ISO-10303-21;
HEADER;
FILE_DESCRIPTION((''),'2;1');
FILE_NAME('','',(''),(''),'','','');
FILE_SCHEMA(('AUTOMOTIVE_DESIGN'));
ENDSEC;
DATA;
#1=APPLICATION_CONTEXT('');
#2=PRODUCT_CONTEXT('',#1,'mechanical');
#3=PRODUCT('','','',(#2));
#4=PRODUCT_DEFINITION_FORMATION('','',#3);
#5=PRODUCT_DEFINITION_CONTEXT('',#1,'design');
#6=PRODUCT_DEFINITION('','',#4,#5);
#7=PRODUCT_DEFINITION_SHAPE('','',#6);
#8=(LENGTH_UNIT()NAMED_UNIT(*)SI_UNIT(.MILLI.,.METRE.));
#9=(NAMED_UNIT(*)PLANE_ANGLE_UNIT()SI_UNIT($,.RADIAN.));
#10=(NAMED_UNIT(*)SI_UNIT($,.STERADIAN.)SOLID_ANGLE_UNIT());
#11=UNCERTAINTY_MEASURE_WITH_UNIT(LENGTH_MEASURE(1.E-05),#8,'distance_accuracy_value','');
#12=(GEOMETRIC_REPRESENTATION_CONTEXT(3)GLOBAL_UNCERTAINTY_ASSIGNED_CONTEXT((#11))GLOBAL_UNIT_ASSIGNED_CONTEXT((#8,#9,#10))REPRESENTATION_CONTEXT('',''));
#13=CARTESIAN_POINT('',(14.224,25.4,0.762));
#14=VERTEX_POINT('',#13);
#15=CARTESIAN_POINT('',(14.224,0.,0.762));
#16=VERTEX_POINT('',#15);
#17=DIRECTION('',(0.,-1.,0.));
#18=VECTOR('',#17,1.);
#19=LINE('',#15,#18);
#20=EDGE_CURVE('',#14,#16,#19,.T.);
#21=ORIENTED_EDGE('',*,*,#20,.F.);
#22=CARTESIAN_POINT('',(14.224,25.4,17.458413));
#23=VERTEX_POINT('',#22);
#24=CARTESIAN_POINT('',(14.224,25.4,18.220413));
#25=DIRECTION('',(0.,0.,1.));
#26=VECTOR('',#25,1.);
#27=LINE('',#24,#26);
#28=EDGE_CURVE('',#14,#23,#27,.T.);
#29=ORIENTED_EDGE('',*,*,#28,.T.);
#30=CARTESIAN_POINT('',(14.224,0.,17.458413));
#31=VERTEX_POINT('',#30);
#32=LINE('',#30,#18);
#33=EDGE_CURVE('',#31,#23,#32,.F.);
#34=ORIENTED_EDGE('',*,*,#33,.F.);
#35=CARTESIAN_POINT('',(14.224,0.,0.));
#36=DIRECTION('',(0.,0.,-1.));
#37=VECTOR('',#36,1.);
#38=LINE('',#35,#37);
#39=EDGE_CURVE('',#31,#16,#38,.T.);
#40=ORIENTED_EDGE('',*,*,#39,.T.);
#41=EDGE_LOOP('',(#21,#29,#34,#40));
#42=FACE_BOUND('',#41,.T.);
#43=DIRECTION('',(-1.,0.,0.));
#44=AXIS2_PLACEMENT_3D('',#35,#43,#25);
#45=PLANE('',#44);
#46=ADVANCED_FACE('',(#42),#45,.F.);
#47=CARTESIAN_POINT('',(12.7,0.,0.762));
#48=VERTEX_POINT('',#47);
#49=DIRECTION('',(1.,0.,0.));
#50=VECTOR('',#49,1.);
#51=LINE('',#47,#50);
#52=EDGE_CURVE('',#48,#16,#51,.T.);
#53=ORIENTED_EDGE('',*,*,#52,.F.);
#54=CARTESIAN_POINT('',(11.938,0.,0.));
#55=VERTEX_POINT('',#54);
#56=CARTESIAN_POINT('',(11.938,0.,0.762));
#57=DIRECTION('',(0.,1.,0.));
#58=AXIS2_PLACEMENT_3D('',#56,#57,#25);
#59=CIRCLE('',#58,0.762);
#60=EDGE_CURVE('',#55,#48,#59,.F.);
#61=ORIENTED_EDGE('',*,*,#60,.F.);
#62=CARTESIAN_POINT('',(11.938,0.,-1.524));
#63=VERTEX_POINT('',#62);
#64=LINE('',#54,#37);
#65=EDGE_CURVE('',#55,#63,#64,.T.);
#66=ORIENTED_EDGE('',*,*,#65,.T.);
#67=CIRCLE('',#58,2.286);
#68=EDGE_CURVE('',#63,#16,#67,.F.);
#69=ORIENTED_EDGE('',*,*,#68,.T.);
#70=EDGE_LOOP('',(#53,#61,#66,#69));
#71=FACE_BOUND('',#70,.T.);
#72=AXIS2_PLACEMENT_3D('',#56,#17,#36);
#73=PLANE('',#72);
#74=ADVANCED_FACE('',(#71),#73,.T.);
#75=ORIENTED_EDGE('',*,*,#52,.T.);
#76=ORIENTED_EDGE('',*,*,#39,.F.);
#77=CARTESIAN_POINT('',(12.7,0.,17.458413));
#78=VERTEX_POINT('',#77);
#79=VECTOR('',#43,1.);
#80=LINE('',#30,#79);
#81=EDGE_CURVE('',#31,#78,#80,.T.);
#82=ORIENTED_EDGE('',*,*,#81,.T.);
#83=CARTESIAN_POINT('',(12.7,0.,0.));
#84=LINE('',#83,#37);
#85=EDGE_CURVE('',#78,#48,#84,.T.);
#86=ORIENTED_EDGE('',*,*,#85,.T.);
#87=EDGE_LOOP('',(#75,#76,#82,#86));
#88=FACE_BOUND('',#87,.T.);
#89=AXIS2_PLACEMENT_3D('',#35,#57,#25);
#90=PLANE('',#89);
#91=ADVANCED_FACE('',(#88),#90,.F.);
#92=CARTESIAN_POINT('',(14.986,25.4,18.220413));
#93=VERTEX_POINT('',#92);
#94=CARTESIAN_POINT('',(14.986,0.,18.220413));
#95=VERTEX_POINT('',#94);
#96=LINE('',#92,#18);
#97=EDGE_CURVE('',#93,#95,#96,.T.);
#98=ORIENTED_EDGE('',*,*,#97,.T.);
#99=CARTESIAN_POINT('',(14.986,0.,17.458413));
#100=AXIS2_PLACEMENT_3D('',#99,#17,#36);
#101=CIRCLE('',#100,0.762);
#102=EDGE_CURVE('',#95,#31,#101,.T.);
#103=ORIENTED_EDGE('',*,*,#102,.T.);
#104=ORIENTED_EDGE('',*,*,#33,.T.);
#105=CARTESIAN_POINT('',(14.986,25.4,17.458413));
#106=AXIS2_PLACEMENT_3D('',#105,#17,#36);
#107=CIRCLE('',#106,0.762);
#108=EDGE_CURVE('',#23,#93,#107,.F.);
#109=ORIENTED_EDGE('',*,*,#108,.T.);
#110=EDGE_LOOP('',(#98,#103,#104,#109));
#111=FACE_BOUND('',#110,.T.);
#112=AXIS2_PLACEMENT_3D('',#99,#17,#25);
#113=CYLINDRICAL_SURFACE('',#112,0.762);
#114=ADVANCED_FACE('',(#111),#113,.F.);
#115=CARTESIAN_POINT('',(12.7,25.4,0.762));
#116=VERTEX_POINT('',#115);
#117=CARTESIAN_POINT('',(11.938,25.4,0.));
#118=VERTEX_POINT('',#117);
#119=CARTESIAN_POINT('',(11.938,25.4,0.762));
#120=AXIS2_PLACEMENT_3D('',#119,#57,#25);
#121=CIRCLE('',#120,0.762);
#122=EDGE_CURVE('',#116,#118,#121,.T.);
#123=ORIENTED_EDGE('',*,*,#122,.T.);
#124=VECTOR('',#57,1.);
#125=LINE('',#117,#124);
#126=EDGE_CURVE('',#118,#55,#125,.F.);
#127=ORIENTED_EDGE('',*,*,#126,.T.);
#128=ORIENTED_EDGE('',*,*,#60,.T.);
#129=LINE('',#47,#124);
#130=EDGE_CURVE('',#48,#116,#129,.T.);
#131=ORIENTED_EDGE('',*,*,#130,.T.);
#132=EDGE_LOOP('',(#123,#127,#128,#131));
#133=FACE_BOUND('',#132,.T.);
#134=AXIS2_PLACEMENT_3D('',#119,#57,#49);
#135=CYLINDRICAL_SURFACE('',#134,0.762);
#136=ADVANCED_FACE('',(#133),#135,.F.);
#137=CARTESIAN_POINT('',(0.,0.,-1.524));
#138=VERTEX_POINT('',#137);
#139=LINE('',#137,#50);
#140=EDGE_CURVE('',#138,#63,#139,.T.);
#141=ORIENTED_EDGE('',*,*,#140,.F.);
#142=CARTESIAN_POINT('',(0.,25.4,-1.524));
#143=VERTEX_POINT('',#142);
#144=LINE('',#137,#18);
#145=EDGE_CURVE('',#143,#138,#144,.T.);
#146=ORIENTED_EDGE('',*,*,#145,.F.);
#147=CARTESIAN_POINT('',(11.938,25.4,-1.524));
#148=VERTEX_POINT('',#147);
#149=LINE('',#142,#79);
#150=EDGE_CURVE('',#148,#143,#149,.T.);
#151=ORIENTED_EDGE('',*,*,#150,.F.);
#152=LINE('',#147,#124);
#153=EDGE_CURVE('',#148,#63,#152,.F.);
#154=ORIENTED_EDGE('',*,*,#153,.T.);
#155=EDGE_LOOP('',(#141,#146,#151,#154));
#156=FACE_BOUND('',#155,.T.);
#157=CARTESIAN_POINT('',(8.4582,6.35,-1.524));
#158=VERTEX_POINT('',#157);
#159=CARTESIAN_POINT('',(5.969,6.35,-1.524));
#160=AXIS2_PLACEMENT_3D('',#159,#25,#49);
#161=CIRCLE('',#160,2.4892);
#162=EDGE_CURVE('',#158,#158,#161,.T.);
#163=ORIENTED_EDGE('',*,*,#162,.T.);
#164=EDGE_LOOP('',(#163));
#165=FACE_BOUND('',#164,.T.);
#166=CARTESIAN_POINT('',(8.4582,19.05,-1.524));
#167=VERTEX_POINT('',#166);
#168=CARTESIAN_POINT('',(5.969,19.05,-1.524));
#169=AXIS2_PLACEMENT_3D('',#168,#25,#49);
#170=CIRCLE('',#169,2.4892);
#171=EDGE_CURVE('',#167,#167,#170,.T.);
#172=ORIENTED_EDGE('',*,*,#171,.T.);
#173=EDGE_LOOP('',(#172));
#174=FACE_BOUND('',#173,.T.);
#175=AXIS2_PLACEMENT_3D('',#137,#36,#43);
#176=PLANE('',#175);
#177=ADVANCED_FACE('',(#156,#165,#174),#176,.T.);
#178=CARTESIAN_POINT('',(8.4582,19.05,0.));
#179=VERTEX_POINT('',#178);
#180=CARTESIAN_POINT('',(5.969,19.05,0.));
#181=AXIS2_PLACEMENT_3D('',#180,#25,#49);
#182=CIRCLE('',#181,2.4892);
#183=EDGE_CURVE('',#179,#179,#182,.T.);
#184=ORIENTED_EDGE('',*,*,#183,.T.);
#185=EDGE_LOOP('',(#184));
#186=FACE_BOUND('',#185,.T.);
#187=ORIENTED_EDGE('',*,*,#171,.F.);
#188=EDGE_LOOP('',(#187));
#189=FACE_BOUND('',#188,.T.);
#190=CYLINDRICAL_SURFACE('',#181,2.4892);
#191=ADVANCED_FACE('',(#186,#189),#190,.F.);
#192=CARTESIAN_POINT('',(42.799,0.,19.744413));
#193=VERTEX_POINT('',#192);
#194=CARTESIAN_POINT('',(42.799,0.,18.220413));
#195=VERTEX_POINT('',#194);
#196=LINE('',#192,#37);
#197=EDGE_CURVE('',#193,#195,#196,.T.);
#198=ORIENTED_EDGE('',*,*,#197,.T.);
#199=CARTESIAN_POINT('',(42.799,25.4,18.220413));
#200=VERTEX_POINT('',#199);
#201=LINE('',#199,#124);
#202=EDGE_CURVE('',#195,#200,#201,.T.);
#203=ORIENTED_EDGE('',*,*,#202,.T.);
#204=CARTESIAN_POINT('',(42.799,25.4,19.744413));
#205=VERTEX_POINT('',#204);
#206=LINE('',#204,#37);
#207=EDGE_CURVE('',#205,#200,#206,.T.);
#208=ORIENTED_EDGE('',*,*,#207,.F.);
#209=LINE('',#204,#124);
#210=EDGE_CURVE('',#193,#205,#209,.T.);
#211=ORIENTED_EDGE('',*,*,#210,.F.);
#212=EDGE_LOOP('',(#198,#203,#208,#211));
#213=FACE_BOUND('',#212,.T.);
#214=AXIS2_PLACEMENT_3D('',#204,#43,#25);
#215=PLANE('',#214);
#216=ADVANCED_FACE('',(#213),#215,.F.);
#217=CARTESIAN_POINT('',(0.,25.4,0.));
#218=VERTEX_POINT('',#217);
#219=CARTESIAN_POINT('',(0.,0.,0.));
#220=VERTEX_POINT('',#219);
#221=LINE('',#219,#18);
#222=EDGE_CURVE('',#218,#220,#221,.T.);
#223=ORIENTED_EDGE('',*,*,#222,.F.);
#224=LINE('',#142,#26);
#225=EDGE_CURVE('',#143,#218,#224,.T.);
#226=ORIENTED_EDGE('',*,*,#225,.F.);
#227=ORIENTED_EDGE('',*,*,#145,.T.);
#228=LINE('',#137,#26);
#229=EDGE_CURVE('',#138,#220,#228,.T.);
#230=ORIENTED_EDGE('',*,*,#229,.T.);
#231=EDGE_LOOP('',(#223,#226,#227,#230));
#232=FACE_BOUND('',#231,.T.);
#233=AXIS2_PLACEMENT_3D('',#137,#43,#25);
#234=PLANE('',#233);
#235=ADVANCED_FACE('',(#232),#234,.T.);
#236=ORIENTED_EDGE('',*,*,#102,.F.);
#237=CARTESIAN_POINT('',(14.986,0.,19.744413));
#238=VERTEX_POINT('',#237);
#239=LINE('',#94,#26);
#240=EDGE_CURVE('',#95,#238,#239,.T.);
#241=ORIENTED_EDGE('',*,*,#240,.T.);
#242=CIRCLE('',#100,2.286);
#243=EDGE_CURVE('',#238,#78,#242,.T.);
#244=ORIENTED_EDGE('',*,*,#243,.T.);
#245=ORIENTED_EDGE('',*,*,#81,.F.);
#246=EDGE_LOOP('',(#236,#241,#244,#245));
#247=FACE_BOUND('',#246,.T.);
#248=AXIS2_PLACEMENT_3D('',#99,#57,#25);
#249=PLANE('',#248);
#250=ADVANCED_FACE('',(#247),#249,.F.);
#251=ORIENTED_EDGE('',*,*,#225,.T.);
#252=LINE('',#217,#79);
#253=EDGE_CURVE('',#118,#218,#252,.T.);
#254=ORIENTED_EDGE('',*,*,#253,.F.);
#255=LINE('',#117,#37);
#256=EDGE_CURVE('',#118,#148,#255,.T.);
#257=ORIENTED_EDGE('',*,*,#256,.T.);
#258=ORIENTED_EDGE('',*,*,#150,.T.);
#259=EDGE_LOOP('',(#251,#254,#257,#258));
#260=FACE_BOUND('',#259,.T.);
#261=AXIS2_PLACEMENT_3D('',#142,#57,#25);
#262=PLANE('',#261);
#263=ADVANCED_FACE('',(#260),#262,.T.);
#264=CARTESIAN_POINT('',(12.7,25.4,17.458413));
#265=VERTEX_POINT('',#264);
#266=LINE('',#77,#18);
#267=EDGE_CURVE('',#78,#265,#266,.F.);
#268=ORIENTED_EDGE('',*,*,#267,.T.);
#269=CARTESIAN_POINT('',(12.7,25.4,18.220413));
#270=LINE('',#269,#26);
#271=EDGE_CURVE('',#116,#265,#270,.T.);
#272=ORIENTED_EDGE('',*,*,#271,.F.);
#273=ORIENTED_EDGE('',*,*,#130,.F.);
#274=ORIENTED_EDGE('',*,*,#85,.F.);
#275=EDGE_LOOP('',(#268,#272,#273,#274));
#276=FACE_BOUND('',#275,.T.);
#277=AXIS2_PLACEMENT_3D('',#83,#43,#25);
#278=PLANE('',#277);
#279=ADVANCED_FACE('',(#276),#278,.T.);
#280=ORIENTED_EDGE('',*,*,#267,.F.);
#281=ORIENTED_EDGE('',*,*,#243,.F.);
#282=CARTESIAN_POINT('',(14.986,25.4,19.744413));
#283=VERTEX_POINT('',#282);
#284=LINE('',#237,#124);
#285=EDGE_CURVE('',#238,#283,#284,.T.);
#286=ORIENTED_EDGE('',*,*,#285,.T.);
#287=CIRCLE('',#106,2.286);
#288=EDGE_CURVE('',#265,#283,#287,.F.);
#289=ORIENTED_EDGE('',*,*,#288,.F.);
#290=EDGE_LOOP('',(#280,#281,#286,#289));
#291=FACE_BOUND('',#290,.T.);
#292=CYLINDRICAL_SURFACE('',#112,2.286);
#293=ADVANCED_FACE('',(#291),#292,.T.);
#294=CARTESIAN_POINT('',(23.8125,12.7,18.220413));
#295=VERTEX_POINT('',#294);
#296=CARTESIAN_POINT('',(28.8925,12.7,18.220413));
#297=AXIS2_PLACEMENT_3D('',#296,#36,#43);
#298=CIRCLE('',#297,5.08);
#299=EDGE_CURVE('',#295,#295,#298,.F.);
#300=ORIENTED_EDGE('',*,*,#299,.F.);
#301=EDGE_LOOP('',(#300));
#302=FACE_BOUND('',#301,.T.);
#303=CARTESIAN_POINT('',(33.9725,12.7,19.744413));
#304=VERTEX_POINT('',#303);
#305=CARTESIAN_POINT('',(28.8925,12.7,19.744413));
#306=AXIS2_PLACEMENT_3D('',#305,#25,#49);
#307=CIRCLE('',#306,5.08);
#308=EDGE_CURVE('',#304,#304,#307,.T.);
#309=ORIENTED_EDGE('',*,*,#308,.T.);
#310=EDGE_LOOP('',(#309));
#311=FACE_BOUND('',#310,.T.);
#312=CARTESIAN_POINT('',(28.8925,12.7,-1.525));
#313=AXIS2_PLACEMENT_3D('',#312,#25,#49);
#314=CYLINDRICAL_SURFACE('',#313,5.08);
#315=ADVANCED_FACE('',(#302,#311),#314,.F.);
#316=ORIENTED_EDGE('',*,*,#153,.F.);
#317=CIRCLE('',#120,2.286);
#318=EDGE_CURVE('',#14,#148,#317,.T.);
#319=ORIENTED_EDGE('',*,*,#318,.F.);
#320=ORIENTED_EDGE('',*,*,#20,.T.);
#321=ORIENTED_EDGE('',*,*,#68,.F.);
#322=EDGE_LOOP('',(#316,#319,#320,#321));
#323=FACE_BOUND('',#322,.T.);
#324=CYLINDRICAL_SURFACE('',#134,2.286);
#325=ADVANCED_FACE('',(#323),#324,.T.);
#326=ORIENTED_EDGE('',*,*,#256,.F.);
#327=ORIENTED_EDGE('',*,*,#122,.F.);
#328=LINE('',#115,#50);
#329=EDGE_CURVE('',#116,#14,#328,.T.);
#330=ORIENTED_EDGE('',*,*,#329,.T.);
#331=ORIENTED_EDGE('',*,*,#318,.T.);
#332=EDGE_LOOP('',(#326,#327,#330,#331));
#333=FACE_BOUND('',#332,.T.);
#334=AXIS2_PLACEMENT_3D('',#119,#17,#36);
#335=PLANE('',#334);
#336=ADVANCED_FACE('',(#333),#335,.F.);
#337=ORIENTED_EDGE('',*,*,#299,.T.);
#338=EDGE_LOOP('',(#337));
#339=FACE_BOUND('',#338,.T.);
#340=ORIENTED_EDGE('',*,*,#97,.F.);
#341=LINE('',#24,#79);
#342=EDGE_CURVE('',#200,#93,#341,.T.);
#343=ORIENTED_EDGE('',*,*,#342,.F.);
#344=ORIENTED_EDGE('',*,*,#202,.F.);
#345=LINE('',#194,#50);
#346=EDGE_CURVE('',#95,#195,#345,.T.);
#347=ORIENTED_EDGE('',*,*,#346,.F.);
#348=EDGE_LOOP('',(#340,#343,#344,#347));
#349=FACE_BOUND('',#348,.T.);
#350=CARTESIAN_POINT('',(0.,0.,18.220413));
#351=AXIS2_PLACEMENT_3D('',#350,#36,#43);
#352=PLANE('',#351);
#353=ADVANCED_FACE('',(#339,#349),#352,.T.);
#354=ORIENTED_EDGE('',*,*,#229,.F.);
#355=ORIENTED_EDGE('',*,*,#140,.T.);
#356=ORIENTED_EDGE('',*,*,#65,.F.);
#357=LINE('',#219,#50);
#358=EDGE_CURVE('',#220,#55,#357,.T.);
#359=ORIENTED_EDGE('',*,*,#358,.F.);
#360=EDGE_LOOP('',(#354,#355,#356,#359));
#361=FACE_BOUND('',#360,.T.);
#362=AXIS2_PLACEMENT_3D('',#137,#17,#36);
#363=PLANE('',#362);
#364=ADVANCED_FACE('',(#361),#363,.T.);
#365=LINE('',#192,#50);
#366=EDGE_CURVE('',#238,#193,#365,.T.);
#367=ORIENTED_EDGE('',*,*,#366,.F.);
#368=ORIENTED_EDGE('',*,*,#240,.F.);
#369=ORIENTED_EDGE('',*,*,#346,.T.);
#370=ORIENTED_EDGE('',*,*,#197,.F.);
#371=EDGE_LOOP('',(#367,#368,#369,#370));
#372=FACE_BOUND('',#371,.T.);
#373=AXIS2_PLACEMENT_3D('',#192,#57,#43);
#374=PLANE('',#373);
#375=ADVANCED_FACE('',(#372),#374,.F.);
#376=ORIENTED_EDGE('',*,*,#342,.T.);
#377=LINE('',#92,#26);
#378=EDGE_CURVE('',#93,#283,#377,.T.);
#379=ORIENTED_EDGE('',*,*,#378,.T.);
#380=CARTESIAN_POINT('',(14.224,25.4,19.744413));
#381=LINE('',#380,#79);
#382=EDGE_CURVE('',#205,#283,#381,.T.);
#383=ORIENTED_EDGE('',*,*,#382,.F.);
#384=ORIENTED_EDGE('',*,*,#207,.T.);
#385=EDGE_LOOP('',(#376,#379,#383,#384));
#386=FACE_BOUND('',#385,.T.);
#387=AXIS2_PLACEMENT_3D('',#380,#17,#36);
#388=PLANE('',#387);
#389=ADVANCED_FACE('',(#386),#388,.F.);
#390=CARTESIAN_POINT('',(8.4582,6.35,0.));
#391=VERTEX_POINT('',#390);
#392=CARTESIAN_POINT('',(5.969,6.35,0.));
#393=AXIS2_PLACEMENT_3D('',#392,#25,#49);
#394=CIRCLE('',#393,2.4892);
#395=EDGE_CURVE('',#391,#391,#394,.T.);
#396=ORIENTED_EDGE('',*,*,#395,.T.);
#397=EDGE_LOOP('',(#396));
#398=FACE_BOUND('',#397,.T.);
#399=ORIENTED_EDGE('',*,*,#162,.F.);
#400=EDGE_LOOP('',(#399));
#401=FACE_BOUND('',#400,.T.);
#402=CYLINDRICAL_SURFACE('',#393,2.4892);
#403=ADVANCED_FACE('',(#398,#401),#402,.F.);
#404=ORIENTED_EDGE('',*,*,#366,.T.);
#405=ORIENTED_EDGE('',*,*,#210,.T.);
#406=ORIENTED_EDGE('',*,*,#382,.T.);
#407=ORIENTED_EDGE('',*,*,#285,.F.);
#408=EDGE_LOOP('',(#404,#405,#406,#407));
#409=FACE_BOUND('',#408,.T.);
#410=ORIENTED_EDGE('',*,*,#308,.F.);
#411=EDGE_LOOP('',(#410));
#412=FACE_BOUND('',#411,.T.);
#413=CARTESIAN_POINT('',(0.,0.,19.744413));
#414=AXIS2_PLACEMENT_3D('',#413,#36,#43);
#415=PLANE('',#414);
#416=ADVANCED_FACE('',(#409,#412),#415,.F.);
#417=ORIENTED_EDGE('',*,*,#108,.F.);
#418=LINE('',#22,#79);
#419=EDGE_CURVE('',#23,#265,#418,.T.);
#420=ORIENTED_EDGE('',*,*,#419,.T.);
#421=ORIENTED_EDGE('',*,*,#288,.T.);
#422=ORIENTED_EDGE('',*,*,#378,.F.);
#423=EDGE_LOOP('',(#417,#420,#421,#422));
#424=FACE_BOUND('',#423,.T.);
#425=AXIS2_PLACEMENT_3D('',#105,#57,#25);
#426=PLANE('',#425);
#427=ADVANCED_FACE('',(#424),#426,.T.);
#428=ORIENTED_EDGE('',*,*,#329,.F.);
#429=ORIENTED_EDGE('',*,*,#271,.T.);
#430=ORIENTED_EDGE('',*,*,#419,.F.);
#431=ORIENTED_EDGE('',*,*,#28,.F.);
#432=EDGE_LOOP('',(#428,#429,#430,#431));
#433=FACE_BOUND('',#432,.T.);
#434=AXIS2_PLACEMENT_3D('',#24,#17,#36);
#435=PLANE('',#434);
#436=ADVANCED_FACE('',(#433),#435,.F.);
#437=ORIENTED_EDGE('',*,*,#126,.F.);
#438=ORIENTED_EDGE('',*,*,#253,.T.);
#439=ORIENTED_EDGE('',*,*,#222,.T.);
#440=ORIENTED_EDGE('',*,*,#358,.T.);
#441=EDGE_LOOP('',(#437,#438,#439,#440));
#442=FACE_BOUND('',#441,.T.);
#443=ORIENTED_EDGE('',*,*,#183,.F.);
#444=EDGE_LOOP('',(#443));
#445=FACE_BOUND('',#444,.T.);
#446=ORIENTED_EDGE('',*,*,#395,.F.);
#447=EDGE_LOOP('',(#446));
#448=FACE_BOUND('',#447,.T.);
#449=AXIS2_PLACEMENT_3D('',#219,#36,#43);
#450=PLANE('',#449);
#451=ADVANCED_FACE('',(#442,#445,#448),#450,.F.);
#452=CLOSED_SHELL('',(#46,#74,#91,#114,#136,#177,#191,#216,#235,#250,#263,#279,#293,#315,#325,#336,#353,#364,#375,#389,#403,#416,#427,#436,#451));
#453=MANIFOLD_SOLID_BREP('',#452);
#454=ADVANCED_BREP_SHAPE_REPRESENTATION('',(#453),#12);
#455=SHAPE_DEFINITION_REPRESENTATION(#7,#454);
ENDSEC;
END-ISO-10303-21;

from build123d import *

# Parameters (mm, degrees)
SKETCH5_W                    = 12.7
SKETCH5_H                    = 25.4
BASE_FLANGE1_DEPTH           = 1.524
EDGE_FLANGE1_STRIP_W         = 7.62
EDGE_FLANGE1_STRIP_H         = 1.524
EDGE_FLANGE1_STRIP_CUT_DEPTH = 25.4
EDGE_FLANGE1_DEPTH           = 25.4
EDGE_FLANGE2_STRIP_W         = 7.62
EDGE_FLANGE2_STRIP_H         = 1.524
EDGE_FLANGE2_STRIP_CUT_DEPTH = 25.4
EDGE_FLANGE2_DEPTH           = 25.4
CUT_EXTRUDE1_REACH           = 56.123
SKETCH16_R                   = 5.08
F_10_CLEARANCE_HOLE2_D       = 4.9784


# Sheet-metal steps are written as plain solids
with BuildPart() as part:
    # Sketch5 → Base-Flange1 (new body)
    with BuildSketch(Plane.XY):
        with Locations((6.35, 12.7)):
            Rectangle(SKETCH5_W, SKETCH5_H)
    extrude(amount=-BASE_FLANGE1_DEPTH)

    # Edge-Flange1 strip (across the edge) → Edge-Flange1 strip cut (cut)
    with BuildSketch(Plane(origin=(12.7, 0, 0), x_dir=(-1, 0, 0), z_dir=(0, 1, 0))):
        with Locations((-3.048, -0.762)):
            Rectangle(EDGE_FLANGE1_STRIP_W, EDGE_FLANGE1_STRIP_H)
    extrude(amount=EDGE_FLANGE1_STRIP_CUT_DEPTH, mode=Mode.SUBTRACT)

    # Edge-Flange1 section (across the edge) → Edge-Flange1 (add)
    with BuildSketch(Plane(origin=(12.7, 0, 0), x_dir=(-1, 0, 0), z_dir=(0, 1, 0))):
        with BuildLine():
            Line((-1.524, 0.762), (-1.524, 18.22041314))
            Line((-1.524, 18.22041314), (0, 18.22041314))
            Line((0, 18.22041314), (0, 0.762))
            ThreePointArc((0, 0.762), (0.223184633, 0.223184633), (0.762, 0))
            Line((0.762, 0), (0.762, -1.524))
            ThreePointArc((0.762, -1.524), (-0.854446102, -0.854446102), (-1.524, 0.762))
        make_face()
    extrude(amount=EDGE_FLANGE1_DEPTH)

    # Edge-Flange2 strip (across the edge) → Edge-Flange2 strip cut (cut)
    with BuildSketch(Plane(origin=(14.224, 25.4, 18.22041314), x_dir=(0, 0, -1), z_dir=(0, -1, 0))):
        with Locations((-3.048, -0.762)):
            Rectangle(EDGE_FLANGE2_STRIP_W, EDGE_FLANGE2_STRIP_H)
    extrude(amount=EDGE_FLANGE2_STRIP_CUT_DEPTH, mode=Mode.SUBTRACT)

    # Edge-Flange2 section (across the edge) → Edge-Flange2 (add)
    with BuildSketch(Plane(origin=(14.224, 25.4, 18.22041314), x_dir=(0, 0, -1), z_dir=(0, -1, 0))):
        with BuildLine():
            Line((-1.524, 0.762), (-1.524, 28.575))
            Line((-1.524, 28.575), (0, 28.575))
            Line((0, 28.575), (0, 0.762))
            ThreePointArc((0, 0.762), (0.223184633, 0.223184633), (0.762, 0))
            Line((0.762, 0), (0.762, -1.524))
            ThreePointArc((0.762, -1.524), (-0.854446102, -0.854446102), (-1.524, 0.762))
        make_face()
    extrude(amount=EDGE_FLANGE2_DEPTH)

    # Sketch16 → Cut-Extrude1 (cut, up to next)
    with BuildSketch(Plane.XY.offset(19.74441314), mode=Mode.PRIVATE) as cut_extrude1_sk1:
        with Locations((28.8925, 12.7)):
            Circle(SKETCH16_R)
    cut_extrude1_tool1 = extrude(cut_extrude1_sk1.sketch, amount=-CUT_EXTRUDE1_REACH, mode=Mode.PRIVATE) & part.part
    add(cut_extrude1_tool1.solids().sort_by_distance((28.8925, 12.7, 19.744413))[0], mode=Mode.SUBTRACT)

    # #10 Clearance Hole2 (through all)
    with Locations(Plane.XY):
        with Locations((5.969, 19.05), (5.969, 6.35)):
            Hole(F_10_CLEARANCE_HOLE2_D / 2)


solid = part.part
